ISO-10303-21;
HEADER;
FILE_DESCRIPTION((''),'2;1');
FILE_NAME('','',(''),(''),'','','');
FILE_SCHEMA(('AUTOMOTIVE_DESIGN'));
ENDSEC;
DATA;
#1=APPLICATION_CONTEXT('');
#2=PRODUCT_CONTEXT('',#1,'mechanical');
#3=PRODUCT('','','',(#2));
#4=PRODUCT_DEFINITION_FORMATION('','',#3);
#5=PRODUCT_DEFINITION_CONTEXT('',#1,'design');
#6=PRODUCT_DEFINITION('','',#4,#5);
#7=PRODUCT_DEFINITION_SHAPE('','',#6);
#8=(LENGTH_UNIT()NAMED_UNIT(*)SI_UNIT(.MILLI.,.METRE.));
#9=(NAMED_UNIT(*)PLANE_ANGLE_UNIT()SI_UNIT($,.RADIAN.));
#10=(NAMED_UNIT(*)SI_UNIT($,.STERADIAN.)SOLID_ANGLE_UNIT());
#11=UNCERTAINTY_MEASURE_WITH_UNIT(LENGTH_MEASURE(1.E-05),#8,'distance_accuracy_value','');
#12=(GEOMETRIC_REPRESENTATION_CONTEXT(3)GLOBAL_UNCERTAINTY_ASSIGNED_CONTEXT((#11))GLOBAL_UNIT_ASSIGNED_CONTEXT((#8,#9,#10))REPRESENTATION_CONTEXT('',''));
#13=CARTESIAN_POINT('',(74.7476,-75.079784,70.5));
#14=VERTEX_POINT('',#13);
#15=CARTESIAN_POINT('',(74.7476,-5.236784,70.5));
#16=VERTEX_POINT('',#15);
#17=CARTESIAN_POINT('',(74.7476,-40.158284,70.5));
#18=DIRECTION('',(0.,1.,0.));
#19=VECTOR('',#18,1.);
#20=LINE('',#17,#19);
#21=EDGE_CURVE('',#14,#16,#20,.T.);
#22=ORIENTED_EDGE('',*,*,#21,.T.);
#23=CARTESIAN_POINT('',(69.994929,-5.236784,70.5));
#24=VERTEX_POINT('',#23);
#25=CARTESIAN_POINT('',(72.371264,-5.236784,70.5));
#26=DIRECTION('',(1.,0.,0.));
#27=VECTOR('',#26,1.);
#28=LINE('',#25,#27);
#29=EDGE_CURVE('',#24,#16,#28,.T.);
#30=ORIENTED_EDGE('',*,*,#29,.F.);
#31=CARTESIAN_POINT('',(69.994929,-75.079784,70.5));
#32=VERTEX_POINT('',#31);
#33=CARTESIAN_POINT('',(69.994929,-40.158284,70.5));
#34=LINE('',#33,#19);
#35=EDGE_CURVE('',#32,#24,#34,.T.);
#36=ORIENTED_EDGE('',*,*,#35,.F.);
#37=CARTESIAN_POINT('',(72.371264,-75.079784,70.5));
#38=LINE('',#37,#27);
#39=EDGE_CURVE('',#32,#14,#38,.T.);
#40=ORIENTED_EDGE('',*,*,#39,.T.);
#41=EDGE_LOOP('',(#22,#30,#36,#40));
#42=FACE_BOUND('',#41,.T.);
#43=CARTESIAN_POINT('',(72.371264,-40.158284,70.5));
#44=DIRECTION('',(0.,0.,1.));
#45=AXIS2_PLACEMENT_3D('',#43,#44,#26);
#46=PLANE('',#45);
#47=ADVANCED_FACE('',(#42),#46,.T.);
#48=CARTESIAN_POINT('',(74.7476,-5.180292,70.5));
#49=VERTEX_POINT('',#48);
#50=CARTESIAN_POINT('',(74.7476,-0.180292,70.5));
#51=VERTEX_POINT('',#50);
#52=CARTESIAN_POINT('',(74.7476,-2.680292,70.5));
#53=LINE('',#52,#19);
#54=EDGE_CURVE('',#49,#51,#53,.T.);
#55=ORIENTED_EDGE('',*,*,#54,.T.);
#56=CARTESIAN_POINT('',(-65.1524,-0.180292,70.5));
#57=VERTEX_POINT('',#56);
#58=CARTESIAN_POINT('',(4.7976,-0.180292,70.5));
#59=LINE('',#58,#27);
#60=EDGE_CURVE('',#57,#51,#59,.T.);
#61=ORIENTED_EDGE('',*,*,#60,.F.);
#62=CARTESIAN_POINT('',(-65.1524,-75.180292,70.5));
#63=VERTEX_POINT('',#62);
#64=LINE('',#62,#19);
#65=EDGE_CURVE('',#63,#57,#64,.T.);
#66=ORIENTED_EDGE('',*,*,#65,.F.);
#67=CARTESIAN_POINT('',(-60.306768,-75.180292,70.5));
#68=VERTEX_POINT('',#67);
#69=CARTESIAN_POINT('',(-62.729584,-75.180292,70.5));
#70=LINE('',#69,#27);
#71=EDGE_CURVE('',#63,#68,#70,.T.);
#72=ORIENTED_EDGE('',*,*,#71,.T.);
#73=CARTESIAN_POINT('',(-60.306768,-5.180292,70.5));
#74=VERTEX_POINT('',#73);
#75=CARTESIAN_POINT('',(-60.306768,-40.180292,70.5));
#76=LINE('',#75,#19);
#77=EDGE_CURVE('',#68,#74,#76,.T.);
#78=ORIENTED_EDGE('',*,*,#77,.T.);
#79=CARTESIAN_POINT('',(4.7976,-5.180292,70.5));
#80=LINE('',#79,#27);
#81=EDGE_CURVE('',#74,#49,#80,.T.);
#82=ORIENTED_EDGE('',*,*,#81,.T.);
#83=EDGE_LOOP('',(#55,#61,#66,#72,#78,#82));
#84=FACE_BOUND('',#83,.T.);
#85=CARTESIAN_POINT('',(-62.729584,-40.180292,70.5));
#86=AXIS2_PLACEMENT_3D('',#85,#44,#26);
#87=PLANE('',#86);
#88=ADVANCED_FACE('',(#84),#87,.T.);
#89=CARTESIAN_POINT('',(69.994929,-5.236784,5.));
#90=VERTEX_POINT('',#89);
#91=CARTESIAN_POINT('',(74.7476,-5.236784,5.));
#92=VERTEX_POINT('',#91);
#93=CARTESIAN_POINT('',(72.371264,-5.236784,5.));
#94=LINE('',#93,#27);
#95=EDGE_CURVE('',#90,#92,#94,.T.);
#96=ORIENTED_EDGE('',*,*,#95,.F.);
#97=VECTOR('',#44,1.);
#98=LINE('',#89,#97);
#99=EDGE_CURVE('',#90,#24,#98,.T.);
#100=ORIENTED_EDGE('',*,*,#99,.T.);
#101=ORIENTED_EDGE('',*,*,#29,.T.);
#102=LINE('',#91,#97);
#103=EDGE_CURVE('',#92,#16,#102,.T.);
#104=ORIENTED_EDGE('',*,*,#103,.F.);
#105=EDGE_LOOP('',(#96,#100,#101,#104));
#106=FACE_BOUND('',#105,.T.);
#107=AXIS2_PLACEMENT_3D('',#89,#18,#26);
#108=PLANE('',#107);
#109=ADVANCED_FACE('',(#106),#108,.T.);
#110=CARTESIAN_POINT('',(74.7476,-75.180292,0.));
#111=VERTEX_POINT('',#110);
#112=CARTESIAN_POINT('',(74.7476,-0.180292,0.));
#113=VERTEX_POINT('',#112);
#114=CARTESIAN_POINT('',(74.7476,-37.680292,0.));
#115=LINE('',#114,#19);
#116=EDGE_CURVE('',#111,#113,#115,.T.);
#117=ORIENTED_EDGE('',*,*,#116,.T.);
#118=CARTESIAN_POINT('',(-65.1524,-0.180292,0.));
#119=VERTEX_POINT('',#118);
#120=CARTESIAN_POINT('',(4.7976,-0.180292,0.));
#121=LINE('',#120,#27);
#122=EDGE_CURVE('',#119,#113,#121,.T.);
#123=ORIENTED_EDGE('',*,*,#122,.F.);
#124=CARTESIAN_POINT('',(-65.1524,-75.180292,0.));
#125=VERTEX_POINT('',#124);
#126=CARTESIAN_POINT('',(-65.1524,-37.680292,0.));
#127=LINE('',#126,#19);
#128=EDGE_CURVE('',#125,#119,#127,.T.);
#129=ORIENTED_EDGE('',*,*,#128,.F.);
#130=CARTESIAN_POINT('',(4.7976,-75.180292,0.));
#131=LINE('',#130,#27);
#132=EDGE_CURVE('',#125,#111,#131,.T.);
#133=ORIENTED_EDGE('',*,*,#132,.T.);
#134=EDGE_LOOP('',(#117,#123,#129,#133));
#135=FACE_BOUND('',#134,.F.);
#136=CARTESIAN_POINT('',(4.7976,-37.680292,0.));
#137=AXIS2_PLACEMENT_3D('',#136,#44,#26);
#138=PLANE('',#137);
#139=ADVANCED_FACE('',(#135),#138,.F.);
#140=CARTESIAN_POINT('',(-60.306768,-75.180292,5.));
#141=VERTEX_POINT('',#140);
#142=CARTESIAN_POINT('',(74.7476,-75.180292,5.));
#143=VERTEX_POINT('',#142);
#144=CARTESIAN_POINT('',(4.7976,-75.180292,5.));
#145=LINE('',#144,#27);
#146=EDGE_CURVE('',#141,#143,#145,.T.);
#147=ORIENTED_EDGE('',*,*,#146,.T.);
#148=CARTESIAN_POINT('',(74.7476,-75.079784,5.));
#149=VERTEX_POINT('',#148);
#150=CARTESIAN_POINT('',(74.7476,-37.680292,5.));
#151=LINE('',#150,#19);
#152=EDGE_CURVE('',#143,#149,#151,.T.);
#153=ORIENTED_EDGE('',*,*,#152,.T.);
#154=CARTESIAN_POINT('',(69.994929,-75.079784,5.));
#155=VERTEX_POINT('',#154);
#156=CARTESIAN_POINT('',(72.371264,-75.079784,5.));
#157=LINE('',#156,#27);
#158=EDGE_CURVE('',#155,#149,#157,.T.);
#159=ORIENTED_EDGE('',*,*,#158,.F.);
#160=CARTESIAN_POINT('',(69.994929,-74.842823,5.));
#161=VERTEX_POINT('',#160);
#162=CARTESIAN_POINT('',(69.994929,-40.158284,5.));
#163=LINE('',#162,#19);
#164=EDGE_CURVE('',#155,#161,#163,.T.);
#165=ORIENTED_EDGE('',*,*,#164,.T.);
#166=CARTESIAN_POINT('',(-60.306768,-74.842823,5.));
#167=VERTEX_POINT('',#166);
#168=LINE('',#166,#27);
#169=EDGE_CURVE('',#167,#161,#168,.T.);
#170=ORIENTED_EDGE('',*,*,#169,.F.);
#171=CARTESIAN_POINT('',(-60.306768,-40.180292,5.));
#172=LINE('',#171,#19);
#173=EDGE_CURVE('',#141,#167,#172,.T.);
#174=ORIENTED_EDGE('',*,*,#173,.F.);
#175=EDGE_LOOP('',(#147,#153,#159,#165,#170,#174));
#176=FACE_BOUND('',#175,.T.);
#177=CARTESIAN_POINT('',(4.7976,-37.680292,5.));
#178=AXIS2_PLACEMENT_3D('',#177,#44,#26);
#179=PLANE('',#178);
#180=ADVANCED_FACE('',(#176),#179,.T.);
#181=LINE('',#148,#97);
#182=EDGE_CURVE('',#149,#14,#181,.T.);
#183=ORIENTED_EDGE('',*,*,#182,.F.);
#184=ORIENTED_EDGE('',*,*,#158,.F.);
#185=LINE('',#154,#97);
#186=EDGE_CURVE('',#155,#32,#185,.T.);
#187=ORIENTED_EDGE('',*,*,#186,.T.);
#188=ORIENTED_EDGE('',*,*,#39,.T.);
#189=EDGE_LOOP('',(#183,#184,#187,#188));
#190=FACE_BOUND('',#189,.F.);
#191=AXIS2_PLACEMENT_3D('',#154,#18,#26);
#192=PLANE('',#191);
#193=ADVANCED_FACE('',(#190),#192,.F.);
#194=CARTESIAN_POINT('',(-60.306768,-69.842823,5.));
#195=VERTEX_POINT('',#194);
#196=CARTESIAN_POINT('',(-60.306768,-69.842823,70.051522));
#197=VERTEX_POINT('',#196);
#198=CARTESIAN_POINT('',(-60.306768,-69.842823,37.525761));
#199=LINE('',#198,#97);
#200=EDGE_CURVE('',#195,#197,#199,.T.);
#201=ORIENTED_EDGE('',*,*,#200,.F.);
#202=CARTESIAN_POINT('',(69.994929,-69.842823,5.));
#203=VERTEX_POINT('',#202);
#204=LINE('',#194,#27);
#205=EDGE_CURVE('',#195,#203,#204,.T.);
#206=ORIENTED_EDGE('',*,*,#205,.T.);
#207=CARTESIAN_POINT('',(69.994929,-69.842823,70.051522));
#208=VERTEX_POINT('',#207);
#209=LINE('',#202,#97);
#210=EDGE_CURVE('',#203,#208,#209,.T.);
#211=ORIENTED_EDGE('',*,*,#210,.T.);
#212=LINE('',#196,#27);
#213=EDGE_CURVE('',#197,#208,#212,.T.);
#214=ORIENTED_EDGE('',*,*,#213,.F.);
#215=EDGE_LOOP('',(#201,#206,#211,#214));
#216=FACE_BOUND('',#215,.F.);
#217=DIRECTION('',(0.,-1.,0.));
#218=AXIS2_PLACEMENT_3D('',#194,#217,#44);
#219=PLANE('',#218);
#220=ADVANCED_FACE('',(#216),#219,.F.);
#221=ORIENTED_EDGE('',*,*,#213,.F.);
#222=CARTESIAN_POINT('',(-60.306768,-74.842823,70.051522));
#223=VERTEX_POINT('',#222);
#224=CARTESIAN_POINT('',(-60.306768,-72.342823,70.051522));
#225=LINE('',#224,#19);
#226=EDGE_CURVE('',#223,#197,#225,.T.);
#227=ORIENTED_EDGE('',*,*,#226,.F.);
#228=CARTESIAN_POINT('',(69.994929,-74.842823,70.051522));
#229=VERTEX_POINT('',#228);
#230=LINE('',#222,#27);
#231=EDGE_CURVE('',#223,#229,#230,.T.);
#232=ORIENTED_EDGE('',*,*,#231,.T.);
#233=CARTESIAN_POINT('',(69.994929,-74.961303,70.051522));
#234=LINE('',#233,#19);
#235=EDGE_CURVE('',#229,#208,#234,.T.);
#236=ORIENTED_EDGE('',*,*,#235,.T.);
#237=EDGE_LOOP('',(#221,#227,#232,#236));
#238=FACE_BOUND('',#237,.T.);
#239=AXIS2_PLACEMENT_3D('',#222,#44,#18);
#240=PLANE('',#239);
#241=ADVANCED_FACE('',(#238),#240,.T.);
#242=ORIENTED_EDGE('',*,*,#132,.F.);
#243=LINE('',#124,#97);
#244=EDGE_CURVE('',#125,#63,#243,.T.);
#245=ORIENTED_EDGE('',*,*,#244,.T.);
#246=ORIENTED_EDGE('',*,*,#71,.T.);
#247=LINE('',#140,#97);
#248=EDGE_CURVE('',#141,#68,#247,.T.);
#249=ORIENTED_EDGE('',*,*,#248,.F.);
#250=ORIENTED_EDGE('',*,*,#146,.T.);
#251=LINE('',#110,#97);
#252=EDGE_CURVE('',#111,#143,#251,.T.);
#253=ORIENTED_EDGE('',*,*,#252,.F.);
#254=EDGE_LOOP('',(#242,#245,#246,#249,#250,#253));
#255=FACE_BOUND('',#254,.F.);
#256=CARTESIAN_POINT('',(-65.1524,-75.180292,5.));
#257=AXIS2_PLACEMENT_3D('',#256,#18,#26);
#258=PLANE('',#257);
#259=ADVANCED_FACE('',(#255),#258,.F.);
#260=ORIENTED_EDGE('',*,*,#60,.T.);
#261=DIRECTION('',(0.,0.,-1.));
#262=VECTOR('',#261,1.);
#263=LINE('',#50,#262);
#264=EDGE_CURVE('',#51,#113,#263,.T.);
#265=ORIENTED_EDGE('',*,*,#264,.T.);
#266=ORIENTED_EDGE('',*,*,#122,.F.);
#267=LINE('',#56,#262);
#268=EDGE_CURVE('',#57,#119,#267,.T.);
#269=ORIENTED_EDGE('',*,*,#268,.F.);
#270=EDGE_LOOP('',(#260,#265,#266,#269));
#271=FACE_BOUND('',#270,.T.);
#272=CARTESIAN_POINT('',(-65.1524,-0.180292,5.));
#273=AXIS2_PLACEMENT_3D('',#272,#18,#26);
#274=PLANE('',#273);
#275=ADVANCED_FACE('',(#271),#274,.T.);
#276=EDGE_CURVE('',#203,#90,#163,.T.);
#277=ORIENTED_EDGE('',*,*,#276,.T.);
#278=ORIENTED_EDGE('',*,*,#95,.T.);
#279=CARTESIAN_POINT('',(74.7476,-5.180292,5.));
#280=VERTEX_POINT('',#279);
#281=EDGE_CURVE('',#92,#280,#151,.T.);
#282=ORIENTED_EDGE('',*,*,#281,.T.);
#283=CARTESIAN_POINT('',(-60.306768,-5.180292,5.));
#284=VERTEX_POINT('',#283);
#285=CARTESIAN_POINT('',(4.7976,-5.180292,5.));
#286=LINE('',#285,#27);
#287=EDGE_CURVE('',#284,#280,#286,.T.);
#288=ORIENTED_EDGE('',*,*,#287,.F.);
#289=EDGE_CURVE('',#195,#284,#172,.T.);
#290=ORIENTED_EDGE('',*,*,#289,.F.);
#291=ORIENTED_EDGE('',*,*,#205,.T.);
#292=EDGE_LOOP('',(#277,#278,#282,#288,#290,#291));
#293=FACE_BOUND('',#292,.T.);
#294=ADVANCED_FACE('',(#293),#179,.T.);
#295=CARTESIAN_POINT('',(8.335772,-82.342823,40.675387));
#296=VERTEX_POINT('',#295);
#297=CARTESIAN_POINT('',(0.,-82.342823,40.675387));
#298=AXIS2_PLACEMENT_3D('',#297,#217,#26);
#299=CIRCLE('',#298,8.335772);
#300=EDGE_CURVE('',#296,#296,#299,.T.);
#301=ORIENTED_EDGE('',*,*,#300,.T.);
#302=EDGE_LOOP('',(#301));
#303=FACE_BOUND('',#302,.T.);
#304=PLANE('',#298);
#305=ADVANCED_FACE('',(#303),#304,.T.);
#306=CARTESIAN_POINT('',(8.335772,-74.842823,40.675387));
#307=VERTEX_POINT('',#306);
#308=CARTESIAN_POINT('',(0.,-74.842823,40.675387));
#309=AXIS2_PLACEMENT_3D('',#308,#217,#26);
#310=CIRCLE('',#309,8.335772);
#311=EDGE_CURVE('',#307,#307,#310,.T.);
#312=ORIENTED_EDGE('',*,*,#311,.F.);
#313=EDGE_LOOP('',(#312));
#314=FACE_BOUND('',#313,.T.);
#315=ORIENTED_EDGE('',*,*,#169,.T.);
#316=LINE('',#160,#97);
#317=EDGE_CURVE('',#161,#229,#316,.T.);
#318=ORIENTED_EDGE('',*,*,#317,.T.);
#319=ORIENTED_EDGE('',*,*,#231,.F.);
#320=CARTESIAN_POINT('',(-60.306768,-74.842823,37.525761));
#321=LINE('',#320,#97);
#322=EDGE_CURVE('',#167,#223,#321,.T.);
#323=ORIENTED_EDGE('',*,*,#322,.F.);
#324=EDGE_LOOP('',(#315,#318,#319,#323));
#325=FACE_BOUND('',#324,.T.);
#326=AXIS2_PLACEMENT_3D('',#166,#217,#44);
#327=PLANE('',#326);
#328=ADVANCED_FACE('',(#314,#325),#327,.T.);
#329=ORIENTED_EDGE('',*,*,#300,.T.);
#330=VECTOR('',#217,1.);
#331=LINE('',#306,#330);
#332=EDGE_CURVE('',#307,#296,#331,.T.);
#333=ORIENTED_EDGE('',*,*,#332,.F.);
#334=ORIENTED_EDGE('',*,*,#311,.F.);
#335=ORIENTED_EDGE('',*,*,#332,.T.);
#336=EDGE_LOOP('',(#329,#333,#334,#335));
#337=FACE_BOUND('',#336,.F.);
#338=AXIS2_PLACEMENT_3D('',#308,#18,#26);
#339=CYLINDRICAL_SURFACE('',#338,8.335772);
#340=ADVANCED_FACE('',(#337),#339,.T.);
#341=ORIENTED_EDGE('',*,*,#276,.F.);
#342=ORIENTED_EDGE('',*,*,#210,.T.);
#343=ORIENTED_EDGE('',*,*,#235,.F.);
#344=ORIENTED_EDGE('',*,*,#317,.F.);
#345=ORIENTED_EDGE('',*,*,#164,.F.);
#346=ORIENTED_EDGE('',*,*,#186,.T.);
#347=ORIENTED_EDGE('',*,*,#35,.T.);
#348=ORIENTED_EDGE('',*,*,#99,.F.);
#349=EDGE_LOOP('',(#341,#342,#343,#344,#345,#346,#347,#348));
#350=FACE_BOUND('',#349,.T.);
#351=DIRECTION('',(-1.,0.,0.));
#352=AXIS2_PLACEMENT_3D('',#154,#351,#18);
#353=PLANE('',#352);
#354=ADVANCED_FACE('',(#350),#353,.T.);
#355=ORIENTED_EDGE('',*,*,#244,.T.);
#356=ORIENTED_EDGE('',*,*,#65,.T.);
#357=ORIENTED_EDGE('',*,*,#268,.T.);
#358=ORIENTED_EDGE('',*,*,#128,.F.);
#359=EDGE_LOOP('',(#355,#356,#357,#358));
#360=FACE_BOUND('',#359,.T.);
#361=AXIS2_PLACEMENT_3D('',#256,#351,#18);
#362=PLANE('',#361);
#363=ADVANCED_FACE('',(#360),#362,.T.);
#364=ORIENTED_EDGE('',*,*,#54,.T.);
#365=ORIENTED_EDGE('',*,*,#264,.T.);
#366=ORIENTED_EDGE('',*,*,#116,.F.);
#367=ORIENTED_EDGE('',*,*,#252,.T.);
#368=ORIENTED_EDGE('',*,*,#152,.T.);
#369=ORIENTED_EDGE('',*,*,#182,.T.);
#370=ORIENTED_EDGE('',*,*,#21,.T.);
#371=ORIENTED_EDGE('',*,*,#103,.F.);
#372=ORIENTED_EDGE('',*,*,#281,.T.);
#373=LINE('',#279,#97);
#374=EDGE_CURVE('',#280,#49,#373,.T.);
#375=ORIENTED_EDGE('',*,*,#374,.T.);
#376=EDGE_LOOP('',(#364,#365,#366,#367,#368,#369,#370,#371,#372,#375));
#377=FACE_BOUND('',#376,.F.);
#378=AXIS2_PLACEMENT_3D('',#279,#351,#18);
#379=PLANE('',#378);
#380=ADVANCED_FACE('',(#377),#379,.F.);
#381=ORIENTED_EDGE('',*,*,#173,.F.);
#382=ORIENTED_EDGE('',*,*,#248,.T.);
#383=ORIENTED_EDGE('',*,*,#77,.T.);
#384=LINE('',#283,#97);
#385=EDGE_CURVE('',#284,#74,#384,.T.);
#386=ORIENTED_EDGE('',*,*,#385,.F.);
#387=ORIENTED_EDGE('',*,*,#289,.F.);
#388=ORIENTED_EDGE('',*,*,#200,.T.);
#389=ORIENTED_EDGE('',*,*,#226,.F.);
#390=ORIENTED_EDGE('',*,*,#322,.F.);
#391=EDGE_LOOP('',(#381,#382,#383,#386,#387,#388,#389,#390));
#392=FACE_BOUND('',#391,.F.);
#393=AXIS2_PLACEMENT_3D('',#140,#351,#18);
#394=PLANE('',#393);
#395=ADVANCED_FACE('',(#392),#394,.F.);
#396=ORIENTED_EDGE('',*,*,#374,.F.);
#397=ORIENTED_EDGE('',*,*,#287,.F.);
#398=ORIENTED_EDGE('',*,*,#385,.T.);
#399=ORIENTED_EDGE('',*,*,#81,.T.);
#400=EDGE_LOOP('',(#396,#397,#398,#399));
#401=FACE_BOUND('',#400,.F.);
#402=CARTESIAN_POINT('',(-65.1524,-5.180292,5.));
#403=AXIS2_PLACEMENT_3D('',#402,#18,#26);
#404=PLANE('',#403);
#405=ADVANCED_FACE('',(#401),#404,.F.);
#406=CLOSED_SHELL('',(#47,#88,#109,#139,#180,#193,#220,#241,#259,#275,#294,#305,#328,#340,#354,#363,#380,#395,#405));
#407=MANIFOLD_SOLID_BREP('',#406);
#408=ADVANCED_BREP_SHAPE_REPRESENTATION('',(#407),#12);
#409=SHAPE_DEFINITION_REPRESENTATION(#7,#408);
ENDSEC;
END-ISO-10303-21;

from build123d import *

# Parameters (mm, degrees)
F0_W      = 139.9
F0_H      = 75
F1_DEPTH  = 5
F2_W      = 139.9
F2_H      = 5
F5_DEPTH  = 65.5
F3_W      = 4.8456325173
F3_H      = 70
F6_DEPTH  = 65.5
F4_W      = 4.7526705265
F4_H      = 69.843
F7_DEPTH  = 65.5
F9_W      = 5
F9_H      = 65.0515219681
F10_DEPTH = 132.6
F11_R     = 8.3357715152
F12_DEPTH = 7.5


with BuildPart() as f1:
    # F0 (on Top) → F1 (new body)
    with BuildSketch(Plane.XY):
        with Locations((4.7975996614, -37.6802921295)):
            Rectangle(F0_W, F0_H)
    extrude(amount=F1_DEPTH)

    # F2 (on face) → F5 (join)
    with BuildSketch(Plane.XY.offset(5)):
        with Locations((4.7975996614, -2.6802921295)):
            Rectangle(F2_W, F2_H)
    extrude(amount=F5_DEPTH)

    # F3 (on face) → F6 (join)
    with BuildSketch(Plane.XY.offset(5)):
        with Locations((-62.72958408, -40.1802921295)):
            Rectangle(F3_W, F3_H)
    extrude(amount=F6_DEPTH)

    # F4 (on face) → F7 (join)
    with BuildSketch(Plane.XY.offset(5)):
        with Locations((72.3712643981, -40.1582837973)):
            Rectangle(F4_W, F4_H)
    extrude(amount=F7_DEPTH)

    # F9 (on face) → F10 (join)
    with BuildSketch(Plane.YZ.offset(-60.3067678213)):
        with Locations((-72.3428228498, 37.525760984)):
            Rectangle(F9_W, F9_H)
    extrude(amount=F10_DEPTH)

    # F11 (on face) → F12 (join)
    with BuildSketch(Plane.XZ.offset(74.8428228498)):
        with Locations((0, 40.6753867865)):
            Circle(F11_R)
    extrude(amount=F12_DEPTH)


solid = f1.part
